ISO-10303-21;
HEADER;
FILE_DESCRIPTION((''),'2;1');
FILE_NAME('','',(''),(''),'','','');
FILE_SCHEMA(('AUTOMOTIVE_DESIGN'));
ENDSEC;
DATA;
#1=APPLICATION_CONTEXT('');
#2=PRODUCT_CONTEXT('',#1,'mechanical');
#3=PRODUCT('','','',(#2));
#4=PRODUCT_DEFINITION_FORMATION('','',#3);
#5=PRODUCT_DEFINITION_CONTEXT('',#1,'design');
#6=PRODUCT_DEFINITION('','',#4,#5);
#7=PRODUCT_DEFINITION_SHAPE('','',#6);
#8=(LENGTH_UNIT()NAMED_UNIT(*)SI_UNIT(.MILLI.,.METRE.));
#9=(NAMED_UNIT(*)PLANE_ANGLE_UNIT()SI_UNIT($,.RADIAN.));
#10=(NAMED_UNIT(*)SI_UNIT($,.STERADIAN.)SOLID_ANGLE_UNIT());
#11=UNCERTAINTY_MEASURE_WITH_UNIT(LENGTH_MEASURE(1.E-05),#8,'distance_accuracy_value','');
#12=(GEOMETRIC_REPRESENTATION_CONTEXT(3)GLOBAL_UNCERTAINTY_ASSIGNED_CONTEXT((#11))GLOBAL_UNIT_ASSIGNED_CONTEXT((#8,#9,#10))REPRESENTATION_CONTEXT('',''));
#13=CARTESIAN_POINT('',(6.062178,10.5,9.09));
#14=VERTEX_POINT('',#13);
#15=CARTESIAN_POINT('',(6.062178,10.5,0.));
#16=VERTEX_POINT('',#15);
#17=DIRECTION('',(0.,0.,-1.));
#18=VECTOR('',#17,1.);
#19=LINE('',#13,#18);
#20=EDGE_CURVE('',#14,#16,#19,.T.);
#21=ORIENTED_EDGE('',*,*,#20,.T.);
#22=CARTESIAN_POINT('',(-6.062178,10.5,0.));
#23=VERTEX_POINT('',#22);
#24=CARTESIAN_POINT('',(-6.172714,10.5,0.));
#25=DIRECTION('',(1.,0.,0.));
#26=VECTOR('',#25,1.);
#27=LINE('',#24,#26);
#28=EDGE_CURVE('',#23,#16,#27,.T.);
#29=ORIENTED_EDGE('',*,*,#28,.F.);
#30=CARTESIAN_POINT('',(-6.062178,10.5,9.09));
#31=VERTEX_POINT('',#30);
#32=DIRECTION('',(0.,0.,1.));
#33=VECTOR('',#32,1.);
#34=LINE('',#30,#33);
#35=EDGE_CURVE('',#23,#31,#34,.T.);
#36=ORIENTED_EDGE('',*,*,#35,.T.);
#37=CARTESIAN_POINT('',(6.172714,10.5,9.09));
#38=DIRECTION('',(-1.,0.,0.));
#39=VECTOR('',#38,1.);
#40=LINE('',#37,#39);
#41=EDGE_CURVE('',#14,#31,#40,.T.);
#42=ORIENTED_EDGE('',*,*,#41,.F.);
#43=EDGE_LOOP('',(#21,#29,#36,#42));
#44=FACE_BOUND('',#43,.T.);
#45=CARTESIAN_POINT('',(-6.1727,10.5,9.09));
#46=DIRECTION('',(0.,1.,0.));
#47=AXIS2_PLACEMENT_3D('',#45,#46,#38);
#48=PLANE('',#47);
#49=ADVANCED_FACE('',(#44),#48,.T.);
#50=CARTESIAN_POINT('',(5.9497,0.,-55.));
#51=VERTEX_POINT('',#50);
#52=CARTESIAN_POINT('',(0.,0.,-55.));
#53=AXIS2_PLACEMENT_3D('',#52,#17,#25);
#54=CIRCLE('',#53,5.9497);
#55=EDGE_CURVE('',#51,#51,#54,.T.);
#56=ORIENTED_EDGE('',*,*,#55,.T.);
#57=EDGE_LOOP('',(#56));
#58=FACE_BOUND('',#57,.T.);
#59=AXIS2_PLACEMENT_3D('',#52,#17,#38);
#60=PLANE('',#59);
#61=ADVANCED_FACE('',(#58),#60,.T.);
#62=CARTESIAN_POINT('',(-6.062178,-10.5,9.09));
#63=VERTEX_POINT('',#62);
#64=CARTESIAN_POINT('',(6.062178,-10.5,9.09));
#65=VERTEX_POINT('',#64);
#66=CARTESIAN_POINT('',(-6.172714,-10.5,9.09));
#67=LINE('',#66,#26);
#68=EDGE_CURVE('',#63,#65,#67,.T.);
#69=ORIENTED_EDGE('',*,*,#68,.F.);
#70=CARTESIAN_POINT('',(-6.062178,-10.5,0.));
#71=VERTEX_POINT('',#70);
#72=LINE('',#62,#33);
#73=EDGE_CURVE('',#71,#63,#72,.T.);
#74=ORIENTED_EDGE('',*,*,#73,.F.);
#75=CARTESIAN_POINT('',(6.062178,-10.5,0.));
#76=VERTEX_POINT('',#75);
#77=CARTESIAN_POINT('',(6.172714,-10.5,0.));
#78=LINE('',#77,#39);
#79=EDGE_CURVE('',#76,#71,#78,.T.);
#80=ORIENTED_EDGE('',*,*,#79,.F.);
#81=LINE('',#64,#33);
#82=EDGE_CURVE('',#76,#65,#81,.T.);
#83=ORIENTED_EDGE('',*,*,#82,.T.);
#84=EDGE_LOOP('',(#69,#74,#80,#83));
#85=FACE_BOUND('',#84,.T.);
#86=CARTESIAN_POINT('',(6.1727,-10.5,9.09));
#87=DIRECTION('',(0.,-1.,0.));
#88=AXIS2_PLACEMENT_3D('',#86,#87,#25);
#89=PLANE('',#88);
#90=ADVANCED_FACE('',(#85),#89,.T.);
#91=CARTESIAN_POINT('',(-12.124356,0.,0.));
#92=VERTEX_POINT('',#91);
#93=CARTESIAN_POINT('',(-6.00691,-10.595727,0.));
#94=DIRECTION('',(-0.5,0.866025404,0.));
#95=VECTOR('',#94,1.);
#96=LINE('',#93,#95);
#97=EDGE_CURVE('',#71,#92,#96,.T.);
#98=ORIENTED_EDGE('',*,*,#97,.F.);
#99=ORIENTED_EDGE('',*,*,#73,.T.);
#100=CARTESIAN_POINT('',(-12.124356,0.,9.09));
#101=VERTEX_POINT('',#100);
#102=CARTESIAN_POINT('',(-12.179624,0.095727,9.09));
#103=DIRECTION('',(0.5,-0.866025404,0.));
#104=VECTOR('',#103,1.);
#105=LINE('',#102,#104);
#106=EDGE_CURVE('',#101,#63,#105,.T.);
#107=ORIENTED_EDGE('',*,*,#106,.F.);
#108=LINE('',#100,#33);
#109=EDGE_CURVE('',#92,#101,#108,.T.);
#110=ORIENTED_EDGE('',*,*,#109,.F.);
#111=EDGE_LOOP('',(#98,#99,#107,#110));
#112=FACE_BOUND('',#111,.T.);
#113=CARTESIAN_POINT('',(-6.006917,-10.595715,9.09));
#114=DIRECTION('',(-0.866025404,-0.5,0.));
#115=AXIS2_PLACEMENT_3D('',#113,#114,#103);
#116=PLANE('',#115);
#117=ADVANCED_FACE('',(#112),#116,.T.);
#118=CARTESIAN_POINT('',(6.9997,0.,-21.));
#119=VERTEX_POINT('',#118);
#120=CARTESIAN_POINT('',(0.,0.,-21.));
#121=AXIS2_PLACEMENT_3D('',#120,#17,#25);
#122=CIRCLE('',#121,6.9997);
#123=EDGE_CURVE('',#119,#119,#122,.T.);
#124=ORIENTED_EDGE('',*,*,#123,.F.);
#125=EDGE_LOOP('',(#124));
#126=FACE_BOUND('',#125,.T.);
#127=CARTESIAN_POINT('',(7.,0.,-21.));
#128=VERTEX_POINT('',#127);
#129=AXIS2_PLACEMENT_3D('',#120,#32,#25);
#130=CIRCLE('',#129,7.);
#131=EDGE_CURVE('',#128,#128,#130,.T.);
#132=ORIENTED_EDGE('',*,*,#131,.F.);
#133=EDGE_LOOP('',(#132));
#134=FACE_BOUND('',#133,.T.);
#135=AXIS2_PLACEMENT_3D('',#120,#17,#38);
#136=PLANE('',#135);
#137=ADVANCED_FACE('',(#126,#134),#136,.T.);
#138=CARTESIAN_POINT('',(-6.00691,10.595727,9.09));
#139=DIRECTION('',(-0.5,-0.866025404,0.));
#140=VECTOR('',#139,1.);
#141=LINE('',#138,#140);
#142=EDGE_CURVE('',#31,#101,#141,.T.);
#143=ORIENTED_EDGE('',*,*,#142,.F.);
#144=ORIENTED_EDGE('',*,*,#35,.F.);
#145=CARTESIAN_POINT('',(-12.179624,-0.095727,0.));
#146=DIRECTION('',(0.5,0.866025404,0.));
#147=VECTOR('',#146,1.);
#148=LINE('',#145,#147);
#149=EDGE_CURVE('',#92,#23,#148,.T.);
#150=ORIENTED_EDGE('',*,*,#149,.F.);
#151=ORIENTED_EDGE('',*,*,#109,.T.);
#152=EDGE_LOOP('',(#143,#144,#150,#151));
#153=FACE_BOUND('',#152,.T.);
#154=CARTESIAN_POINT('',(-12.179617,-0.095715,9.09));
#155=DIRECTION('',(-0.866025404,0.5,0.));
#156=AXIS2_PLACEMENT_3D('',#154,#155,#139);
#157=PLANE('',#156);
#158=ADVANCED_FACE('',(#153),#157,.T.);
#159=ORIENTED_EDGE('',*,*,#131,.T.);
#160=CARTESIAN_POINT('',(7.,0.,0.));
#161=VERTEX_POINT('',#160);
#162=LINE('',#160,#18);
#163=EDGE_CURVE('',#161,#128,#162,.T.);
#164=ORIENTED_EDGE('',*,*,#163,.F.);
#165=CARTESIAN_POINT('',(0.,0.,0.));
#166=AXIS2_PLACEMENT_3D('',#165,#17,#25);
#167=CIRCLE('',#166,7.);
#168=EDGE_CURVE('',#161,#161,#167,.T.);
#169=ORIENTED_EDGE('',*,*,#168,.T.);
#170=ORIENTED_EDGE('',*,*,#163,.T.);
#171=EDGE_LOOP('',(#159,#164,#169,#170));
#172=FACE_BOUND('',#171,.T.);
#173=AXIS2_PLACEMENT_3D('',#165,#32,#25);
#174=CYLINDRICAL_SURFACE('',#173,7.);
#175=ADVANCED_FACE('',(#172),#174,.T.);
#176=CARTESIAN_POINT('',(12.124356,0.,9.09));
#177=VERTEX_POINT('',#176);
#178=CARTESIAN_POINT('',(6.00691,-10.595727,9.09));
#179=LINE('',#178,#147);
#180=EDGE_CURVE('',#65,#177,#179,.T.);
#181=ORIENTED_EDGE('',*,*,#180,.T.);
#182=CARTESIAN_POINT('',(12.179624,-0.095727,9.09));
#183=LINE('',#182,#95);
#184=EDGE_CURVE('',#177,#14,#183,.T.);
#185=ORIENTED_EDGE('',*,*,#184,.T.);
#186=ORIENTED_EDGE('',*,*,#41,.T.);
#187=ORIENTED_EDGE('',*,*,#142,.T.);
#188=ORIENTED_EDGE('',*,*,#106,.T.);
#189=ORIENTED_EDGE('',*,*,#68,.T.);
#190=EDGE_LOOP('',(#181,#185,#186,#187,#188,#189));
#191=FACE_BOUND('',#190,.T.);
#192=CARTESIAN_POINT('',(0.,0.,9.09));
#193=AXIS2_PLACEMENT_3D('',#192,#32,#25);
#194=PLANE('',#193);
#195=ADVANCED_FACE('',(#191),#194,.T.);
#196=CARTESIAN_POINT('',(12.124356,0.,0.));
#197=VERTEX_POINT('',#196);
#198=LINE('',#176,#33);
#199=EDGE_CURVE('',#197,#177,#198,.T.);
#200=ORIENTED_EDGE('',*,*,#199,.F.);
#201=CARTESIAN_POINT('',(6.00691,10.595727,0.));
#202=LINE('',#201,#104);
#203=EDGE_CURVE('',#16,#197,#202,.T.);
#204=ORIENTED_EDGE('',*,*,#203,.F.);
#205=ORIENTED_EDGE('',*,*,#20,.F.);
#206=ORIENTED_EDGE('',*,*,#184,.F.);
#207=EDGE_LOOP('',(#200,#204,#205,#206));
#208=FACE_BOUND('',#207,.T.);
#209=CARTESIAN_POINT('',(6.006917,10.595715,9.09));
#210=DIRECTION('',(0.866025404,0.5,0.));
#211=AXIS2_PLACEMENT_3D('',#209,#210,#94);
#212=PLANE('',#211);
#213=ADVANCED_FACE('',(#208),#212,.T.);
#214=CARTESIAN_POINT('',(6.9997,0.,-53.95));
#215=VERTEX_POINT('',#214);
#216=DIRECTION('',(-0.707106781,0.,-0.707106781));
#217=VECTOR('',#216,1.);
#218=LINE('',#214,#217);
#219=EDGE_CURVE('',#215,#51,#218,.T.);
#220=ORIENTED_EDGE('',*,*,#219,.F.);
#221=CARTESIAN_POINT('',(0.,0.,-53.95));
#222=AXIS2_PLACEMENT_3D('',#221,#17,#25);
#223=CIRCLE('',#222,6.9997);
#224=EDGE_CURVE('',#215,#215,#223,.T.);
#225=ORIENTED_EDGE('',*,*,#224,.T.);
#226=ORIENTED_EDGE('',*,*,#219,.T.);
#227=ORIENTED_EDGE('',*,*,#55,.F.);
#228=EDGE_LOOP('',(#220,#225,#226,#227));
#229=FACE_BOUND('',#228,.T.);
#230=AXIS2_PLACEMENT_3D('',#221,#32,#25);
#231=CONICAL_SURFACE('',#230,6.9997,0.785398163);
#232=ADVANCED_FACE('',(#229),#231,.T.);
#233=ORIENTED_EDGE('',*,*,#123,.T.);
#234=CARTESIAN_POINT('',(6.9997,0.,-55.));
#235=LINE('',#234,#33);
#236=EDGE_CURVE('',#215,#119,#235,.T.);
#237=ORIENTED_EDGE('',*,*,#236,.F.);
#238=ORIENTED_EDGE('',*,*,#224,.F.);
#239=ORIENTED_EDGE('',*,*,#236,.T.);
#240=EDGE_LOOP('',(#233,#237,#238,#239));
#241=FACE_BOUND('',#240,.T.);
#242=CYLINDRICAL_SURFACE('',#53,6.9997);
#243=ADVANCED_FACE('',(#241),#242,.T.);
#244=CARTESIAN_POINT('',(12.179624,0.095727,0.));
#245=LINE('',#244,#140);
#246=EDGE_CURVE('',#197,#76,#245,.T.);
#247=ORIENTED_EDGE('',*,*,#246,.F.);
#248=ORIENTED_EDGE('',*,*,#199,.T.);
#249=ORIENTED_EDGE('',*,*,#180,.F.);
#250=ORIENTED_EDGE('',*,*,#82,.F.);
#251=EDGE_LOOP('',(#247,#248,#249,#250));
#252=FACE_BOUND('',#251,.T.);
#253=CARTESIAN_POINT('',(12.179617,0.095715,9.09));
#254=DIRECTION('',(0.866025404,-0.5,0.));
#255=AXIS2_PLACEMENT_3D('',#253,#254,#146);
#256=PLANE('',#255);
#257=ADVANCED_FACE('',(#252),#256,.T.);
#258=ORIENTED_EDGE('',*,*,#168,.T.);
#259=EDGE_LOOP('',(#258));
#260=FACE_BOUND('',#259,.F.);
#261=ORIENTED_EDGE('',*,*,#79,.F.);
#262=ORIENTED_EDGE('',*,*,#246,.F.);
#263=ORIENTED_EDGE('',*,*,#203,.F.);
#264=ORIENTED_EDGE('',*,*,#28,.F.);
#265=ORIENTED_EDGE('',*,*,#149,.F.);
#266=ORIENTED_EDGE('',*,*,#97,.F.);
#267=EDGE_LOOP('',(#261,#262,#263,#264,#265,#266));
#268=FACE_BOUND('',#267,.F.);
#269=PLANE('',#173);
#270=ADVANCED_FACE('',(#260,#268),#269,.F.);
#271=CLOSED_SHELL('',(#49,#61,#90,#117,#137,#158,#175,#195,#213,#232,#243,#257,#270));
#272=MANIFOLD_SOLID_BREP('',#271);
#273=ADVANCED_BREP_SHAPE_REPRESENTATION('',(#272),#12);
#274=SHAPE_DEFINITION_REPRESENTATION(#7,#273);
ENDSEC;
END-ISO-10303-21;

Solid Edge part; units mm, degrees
sketch "Sketch1" plane through (0, 0, 0) normal (0, 0, 1) x (1, 0, 0)
  circle A0 centre (0, 0) radius 12.18
  dimension "D1" = 24.36
extrude "Protrusion1" add sketch "Sketch1" along normal blind 9.09
sketch "Sketch2" plane through (0, 0, 0) normal (0, 0, -1) x (1, 0, 0)
  circle A0 centre (0, 0) radius 7
extrude "Protrusion2" add sketch "Sketch2" along normal blind 55
sketch "Sketch3" plane through (0, 0, -55) normal (0, 0, -1) x (1, 0, 0)
  circle A0 centre (0, 0) radius 6.9997
extrude "Cutout1" cut sketch "Sketch3" against normal blind 34 flip side to cut
chamfer "Chamfer_1" distance 1.05 angle 45 1 edges at (-6.9997, 0, -55)
sketch "Sketch4" plane through (0, 0, 9.09) normal (0, 0, 1) x (1, 0, 0)
  line L0 (-6.1727, 10.5) -> (6.1727, 10.5)
  dimension "D1" = 21
extrude "Cutout2" cut sketch "Sketch4" against normal up to next material side at (0, 10.55, 9.09)
pattern_circular "Pattern1" count 6 over 360 about axis through (0, 0, 9.09) along (0, 0, 1) of "Cutout2"
properties part number "24101444"
